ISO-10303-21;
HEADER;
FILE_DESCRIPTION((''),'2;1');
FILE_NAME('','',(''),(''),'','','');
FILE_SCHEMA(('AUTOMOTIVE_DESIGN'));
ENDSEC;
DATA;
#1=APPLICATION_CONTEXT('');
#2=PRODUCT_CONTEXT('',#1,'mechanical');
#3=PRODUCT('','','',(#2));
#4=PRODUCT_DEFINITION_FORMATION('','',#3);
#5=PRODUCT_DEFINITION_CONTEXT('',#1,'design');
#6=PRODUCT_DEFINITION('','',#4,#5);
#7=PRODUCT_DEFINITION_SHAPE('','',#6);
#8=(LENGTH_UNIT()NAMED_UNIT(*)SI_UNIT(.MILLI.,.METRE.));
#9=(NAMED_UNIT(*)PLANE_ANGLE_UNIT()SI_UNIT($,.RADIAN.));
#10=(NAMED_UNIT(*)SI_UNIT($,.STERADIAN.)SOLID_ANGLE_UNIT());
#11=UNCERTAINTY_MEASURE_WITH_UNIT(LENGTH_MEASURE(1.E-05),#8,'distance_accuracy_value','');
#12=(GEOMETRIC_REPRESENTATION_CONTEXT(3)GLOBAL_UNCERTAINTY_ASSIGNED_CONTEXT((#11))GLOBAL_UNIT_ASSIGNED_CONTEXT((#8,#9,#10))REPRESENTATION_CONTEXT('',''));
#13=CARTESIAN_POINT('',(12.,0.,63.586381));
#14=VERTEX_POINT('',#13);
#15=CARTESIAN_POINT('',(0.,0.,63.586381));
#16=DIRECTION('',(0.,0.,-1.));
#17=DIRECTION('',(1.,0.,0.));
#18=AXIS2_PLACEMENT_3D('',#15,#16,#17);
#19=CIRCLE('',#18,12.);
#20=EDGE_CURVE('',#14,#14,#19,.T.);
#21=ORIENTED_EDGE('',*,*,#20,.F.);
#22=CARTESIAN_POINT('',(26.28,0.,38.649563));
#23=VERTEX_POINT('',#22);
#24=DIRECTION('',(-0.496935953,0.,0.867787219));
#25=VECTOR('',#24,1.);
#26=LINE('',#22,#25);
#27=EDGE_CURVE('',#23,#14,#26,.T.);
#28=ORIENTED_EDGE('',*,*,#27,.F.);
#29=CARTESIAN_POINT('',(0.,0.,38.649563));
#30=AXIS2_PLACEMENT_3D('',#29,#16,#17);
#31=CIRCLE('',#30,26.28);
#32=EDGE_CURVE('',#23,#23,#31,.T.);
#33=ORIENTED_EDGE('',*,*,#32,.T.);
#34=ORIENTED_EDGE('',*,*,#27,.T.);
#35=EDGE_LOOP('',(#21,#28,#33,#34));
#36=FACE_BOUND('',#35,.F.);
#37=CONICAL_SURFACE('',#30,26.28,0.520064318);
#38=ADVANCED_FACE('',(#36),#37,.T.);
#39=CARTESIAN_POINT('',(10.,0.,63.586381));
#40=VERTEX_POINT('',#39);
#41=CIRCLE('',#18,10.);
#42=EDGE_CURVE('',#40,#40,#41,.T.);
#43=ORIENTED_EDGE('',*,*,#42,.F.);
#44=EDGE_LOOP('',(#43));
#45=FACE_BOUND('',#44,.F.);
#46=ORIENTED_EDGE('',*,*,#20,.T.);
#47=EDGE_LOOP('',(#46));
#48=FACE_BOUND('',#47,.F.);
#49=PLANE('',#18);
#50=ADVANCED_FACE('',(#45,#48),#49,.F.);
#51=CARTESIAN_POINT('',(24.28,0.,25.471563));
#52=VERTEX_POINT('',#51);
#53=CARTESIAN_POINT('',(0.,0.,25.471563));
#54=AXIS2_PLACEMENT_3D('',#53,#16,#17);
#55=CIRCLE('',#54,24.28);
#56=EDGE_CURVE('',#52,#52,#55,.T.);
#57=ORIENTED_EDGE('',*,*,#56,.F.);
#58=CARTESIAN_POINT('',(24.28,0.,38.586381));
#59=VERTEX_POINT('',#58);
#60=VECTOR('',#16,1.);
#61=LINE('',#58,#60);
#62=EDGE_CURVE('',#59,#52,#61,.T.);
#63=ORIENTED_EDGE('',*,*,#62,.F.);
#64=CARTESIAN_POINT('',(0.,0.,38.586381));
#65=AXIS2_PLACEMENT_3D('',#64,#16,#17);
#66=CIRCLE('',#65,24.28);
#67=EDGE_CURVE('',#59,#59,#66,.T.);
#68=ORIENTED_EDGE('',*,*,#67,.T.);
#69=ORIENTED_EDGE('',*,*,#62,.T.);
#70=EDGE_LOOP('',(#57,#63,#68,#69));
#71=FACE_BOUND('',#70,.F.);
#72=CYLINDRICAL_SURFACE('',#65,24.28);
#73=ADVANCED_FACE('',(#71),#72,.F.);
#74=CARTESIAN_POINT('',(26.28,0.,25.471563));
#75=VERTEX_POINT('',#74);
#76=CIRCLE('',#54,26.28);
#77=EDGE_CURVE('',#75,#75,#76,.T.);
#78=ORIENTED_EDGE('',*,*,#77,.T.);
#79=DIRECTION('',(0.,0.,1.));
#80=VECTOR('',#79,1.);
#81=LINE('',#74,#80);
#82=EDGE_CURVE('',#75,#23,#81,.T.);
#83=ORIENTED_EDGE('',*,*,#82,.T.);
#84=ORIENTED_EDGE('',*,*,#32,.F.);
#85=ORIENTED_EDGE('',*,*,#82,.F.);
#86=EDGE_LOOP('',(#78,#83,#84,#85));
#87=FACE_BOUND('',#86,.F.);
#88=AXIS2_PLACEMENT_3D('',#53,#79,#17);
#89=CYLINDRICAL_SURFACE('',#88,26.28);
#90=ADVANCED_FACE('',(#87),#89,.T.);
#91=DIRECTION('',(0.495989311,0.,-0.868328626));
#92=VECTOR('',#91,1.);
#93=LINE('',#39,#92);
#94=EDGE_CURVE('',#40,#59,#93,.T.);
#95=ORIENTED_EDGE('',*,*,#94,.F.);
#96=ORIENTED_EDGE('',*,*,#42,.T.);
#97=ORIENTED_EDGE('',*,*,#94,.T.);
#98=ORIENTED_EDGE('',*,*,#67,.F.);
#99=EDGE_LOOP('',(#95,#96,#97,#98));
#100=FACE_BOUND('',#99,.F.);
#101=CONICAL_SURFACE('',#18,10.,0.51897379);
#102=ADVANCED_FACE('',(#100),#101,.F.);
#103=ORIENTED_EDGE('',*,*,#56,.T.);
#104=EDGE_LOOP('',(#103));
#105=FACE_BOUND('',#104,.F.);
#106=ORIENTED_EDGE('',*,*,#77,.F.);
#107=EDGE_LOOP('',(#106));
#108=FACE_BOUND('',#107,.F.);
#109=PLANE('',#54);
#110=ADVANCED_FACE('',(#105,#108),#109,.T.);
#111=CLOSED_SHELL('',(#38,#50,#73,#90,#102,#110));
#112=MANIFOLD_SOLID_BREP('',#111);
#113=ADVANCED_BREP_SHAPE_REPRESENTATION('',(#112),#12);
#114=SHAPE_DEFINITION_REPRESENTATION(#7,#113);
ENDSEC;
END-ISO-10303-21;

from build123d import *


# Not quite as in the source:
# - a feature names something its author has since deleted; it is built from what else it names


with BuildPart() as f1:
    # F0 (on Front) → F1 (revolve)
    with BuildSketch(Plane.XZ):
        Polygon((12, 63.5863808764), (10, 63.5863808764), (24.28, 38.5863808764), (24.28, 25.4715627463), (26.28, 25.4715627463), (26.28, 38.6495627463), align=None)
    revolve(axis=Axis((0, 0, 35.6375661366), (0, 0, -1)))


solid = f1.part
